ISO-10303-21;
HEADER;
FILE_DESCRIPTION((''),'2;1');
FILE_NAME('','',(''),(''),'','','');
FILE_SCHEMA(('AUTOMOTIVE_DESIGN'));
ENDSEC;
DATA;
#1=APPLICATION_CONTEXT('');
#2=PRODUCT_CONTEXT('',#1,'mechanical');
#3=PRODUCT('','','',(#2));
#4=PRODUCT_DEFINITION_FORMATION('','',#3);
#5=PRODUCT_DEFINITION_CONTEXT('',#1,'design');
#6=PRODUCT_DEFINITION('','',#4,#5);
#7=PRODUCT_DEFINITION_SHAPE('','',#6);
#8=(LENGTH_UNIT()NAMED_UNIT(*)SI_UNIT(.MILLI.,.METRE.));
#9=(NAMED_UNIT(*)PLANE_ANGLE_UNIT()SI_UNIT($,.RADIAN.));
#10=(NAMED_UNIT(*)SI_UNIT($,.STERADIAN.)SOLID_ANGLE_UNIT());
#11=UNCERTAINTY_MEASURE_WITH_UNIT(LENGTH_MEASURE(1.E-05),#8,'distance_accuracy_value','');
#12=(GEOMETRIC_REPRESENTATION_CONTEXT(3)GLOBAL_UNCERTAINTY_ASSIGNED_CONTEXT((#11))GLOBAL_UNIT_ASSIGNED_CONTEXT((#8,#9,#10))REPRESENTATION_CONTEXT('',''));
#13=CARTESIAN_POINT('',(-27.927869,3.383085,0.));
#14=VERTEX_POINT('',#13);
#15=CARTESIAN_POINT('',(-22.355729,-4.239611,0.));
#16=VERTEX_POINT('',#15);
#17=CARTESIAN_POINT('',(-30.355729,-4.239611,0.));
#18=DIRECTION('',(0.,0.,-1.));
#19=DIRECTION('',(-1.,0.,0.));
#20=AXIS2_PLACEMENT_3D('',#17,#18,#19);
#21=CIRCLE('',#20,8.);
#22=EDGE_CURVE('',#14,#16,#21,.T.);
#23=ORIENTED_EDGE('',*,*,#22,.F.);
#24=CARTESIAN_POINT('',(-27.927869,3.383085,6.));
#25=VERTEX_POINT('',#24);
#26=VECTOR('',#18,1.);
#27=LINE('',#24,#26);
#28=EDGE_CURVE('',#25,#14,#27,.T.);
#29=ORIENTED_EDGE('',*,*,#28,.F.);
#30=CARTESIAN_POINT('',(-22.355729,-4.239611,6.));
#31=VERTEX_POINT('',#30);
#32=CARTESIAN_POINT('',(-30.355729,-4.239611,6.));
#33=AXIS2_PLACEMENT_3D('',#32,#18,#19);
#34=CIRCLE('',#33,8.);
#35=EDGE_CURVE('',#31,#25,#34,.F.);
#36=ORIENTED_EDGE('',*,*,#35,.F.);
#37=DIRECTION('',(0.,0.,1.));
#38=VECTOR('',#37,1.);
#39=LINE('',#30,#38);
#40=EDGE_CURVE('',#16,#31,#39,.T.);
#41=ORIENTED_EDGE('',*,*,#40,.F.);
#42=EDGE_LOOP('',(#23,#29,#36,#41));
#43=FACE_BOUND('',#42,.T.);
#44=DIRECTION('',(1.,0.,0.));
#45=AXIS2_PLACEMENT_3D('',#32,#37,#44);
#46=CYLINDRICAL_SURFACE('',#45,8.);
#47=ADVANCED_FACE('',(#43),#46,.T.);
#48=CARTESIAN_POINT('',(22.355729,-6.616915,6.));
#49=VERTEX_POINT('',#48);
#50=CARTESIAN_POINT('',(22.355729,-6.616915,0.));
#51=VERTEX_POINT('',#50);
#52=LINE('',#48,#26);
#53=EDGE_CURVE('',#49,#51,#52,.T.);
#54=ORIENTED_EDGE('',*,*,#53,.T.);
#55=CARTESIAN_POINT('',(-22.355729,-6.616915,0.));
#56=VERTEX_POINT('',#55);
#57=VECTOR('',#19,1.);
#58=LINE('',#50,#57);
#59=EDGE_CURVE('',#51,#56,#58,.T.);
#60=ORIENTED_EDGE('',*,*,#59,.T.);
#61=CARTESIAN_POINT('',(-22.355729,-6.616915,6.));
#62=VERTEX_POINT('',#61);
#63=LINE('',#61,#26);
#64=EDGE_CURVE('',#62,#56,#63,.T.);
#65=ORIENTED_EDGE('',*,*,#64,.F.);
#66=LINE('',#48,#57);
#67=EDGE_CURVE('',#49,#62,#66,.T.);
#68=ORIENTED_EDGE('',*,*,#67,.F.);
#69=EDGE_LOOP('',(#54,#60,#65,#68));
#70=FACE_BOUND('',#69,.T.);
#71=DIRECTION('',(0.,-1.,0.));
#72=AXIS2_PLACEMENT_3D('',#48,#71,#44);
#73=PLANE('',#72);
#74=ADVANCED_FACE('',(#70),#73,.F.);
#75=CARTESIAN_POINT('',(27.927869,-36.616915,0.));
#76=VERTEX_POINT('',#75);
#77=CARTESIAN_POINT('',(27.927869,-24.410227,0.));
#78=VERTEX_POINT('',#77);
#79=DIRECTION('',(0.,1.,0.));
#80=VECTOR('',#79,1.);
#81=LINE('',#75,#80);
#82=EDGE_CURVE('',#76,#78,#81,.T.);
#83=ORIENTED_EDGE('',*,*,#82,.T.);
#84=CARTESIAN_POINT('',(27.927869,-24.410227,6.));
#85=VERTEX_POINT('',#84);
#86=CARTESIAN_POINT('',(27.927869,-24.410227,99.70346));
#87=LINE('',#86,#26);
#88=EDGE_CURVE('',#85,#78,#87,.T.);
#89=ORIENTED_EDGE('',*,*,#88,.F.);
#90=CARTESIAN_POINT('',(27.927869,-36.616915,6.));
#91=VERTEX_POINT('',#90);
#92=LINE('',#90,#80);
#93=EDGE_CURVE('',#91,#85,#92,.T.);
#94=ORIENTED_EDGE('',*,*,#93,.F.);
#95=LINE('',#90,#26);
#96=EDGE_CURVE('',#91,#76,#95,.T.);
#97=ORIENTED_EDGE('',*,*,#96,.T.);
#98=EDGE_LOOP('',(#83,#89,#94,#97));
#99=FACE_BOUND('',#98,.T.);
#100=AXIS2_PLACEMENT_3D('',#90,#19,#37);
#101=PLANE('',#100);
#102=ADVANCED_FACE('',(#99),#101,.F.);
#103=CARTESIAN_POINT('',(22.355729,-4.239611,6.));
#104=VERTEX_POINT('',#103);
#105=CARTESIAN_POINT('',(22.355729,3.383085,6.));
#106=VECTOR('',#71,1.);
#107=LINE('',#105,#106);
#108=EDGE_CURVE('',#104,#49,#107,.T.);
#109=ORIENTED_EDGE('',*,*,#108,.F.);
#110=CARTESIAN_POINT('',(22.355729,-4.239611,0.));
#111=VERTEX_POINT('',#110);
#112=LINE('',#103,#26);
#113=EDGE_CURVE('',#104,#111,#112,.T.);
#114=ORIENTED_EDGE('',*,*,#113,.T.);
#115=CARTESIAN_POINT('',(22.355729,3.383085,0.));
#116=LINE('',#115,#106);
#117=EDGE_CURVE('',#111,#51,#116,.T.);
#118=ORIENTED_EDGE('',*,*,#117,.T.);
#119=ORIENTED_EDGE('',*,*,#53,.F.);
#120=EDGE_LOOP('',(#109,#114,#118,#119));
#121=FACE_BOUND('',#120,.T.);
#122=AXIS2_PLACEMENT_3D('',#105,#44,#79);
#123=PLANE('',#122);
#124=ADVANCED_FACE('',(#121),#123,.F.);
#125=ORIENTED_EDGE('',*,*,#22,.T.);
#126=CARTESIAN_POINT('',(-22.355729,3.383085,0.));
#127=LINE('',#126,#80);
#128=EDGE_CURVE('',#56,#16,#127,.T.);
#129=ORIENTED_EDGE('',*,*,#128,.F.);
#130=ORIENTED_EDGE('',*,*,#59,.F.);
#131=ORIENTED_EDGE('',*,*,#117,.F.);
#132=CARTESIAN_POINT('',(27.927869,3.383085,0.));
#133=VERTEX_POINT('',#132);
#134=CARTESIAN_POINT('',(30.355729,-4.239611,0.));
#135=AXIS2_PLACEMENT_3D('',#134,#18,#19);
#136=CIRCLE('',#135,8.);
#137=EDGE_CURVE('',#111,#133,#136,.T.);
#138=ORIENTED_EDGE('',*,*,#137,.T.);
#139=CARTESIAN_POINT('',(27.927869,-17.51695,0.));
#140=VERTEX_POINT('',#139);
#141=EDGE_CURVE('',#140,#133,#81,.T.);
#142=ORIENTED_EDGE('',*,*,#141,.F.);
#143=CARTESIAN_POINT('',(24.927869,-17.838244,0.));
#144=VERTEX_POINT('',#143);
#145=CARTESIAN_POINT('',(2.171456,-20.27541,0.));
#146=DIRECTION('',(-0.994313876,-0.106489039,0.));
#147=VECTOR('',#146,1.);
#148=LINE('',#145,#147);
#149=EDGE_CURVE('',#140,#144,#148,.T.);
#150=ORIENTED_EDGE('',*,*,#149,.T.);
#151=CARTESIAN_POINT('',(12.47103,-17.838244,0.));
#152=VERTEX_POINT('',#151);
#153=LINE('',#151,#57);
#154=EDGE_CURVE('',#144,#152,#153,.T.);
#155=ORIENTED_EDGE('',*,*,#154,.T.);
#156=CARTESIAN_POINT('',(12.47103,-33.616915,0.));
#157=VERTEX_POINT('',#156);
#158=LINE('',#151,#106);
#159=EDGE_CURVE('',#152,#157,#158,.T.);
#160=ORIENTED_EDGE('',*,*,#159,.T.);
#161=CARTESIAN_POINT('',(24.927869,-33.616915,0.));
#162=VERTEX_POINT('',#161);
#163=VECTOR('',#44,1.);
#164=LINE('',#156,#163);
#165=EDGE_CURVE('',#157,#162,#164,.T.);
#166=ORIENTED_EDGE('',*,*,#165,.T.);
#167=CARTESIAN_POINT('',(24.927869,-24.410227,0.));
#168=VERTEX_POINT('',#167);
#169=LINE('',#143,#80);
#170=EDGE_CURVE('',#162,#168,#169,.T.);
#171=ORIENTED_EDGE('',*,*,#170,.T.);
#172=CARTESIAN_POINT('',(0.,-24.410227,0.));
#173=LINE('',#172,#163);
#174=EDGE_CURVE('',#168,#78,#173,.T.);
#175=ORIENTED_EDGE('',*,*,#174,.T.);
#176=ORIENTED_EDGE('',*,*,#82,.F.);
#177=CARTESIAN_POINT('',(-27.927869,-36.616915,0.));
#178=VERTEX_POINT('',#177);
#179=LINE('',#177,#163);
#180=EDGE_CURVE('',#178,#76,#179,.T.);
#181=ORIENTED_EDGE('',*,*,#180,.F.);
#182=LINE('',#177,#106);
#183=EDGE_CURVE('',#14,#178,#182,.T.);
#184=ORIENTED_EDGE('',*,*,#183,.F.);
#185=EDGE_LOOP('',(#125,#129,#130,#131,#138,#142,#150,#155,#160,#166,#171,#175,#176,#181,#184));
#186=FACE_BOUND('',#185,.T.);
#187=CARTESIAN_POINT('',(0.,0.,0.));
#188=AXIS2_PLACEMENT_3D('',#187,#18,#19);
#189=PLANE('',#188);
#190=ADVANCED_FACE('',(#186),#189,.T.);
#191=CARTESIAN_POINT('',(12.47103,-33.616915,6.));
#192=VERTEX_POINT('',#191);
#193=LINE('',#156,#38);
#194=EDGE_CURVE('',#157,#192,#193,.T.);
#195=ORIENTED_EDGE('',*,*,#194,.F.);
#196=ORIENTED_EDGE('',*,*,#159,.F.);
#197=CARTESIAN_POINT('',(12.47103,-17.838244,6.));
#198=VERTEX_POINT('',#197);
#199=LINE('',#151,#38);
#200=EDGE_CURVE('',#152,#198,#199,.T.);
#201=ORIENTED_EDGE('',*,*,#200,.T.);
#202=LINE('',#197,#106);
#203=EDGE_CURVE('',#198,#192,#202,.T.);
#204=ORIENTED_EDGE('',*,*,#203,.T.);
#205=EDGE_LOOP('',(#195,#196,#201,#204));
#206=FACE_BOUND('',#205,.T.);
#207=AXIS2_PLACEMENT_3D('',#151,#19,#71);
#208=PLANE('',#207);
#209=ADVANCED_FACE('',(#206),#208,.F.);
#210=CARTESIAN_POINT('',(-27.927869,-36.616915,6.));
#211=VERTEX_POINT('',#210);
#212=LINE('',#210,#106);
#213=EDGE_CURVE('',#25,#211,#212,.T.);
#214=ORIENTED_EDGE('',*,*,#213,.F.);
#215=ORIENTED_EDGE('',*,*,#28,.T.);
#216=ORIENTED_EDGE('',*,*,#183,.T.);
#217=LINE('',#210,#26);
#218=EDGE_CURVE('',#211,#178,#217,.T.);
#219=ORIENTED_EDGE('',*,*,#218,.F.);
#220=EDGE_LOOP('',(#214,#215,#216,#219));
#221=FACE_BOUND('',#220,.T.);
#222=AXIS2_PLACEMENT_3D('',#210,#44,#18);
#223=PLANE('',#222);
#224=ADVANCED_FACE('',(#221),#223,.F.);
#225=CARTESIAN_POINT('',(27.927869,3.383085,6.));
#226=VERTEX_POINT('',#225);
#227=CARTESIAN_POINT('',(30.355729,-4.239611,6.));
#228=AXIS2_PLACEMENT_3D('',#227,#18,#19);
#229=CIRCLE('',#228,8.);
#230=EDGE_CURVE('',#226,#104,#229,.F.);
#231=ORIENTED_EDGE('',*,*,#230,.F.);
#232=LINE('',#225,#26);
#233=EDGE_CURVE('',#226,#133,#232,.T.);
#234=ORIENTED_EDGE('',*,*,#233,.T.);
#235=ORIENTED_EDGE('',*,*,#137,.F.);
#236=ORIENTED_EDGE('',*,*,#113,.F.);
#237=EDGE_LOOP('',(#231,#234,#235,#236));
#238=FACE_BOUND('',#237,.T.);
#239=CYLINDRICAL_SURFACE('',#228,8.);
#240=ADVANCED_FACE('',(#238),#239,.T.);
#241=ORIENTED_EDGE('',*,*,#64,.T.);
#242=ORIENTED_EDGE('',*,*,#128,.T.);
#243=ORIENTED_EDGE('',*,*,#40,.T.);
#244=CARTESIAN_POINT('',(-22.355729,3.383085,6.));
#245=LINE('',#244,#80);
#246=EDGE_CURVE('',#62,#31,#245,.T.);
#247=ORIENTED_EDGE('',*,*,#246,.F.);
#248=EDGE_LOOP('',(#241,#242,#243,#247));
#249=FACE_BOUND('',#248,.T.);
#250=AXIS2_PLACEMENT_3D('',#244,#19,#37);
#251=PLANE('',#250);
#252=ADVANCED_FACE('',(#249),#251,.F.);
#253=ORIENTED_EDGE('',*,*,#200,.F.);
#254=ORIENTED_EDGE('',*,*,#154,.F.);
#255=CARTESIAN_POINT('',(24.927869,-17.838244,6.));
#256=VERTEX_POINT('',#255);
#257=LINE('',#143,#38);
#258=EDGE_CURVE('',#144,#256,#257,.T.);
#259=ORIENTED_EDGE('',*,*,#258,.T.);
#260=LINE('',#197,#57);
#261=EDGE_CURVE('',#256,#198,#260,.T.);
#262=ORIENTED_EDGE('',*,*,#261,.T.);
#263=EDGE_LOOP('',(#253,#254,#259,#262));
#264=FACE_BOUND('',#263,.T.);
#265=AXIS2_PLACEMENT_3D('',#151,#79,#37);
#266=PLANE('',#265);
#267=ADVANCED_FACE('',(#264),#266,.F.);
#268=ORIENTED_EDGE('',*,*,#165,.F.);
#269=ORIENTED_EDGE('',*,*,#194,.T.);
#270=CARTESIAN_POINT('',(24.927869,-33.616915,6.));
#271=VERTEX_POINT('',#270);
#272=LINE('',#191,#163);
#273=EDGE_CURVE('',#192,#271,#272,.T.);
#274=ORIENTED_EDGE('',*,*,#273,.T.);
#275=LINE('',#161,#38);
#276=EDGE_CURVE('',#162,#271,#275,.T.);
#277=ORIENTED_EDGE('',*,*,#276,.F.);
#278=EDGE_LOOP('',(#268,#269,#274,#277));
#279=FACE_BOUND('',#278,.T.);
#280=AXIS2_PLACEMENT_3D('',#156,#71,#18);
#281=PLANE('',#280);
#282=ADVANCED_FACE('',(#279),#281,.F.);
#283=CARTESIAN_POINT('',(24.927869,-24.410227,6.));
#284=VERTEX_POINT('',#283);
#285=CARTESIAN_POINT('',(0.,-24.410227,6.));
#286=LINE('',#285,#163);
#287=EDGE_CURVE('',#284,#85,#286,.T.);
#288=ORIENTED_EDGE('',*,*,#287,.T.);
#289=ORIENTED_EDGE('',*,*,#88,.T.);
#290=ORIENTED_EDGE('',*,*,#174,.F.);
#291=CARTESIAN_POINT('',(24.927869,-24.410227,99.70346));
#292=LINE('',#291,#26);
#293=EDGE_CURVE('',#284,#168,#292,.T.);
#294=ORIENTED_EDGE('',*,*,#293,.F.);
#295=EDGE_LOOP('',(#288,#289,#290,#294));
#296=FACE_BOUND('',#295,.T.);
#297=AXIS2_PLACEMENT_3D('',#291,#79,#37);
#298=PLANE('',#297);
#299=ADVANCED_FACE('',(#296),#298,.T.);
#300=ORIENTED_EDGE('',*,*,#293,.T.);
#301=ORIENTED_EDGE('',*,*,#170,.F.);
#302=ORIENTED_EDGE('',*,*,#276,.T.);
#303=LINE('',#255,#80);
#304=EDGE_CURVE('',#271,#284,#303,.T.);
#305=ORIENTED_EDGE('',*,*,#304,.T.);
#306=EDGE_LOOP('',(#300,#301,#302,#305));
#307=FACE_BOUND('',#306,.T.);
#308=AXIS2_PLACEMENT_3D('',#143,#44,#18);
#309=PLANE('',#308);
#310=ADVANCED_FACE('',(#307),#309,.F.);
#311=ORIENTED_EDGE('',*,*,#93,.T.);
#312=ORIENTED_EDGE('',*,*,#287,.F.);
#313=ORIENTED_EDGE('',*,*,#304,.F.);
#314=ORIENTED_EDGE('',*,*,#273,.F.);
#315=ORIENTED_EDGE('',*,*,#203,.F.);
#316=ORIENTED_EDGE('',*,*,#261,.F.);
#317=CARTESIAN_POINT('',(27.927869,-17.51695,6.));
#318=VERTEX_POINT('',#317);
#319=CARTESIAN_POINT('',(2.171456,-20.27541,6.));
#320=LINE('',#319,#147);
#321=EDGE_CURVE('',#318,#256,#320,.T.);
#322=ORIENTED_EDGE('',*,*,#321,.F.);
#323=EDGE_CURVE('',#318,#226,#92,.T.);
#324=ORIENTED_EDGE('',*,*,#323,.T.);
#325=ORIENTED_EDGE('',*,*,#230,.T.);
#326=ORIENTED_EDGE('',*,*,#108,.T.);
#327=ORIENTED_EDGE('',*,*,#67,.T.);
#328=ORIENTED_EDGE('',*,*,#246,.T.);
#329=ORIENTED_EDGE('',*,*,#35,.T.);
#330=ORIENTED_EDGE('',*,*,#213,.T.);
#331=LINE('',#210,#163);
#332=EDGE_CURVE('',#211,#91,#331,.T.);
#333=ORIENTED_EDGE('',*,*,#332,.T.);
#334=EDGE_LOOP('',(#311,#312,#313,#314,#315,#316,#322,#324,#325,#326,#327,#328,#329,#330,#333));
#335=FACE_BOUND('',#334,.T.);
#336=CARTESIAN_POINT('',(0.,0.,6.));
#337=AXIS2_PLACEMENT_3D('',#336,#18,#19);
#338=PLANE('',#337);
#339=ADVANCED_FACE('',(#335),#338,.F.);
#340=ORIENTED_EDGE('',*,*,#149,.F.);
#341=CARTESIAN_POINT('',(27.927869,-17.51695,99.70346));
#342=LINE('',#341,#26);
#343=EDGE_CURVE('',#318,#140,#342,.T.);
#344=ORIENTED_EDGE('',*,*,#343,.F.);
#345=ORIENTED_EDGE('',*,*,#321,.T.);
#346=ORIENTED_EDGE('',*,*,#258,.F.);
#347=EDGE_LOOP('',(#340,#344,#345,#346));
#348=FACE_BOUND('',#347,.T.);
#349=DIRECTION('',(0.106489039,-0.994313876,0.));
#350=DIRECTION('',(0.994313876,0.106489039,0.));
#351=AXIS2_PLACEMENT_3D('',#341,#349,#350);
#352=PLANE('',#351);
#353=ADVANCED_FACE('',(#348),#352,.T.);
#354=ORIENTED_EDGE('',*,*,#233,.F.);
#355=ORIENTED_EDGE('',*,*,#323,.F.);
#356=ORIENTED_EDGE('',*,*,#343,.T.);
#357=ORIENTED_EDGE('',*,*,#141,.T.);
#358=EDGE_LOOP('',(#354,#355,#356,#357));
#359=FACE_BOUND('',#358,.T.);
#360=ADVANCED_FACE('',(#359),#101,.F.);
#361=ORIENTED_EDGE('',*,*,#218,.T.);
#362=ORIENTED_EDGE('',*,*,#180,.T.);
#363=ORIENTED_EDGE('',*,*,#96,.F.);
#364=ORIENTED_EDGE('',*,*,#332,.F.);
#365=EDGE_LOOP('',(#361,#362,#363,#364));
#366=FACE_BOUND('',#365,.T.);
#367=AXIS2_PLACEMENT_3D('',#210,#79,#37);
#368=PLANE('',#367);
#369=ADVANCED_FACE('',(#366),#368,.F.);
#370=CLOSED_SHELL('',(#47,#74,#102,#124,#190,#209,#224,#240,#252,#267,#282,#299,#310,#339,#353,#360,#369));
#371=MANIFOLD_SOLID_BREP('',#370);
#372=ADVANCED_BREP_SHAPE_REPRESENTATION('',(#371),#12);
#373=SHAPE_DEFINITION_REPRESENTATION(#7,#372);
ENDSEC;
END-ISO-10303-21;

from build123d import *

# Parameters (mm, degrees)
BOSS_EXTRUDE1_DEPTH     = 6
FILLET7_R               = 8
FILLET8_R               = 8
SKETCH3_W               = 12.456838911
SKETCH3_H               = 15.77867169
CUT_EXTRUDE1_DEPTH      = 47.440976911
CUT_EXTRUDE2_DEPTH      = 47.440976911
CUT_EXTRUDE2_DEPTH_BACK = 47.440976911


with BuildPart() as part:
    # Sketch1 → Boss-Extrude1 (new body)
    with BuildSketch(Plane.XY):
        Polygon((-27.927868544, -36.616915423), (27.927868544, -36.616915423), (27.927868544, 3.383084577), (22.35572924, 3.383084577), (22.35572924, -6.616915423), (-22.35572924, -6.616915423), (-22.35572924, 3.383084577), (-27.927868544, 3.383084577), align=None)
    extrude(amount=BOSS_EXTRUDE1_DEPTH)

    # Fillet7
    # the kernel refuses this fillet: 8 mm, written as the material it takes off along each edge
    with BuildSketch(Plane(origin=(-22.35572924, 3.383084577, -19.056739693), x_dir=(0, -1, 0), z_dir=(0, 0, 1))) as fillet7_piece_1:
        with BuildLine():
            CenterArc((7.622695877, -8), FILLET7_R, 90, 72.333104018)
            Line((0, -5.572139303), (-0.152453918, -5.52358209))
            ThreePointArc((-0.152453918, -5.52358209), (-0.16, -2.786069652), (-0.16, 0))
            Line((-0.16, 0), (0, 0.16))
            Line((0, 0.16), (7.622695877, 0.16))
            Line((7.622695877, 0.16), (7.622695877, 0))
        make_face()
    extrude(amount=44.113479387, mode=Mode.SUBTRACT)

    # Fillet8
    # the kernel refuses this fillet: 8 mm, written as the material it takes off along each edge
    with BuildSketch(Plane(origin=(22.35572924, 3.383084577, -19.056739693), x_dir=(1, 0, 0), z_dir=(0, 0, 1))) as fillet8_piece_1:
        with BuildLine():
            CenterArc((8, -7.622695877), FILLET8_R, 107.666895982, 72.333104018)
            Line((0, -7.622695877), (-0.16, -7.622695877))
            Line((-0.16, -7.622695877), (-0.16, 0))
            Line((-0.16, 0), (0, 0.16))
            ThreePointArc((0, 0.16), (2.786069652, 0.16), (5.52358209, 0.152453918))
            Line((5.52358209, 0.152453918), (5.572139303, 0))
        make_face()
    extrude(amount=44.113479387, mode=Mode.SUBTRACT)

    # Sketch3 → Cut-Extrude1 (cut, through all)
    with BuildSketch(Plane.XY.offset(6)):
        with Locations((18.699449089, -25.727579578)):
            Rectangle(SKETCH3_W, SKETCH3_H)
    extrude(amount=-CUT_EXTRUDE1_DEPTH, mode=Mode.SUBTRACT)

    # Sketch4 → Cut-Extrude2 (cut, two sides: drawn at the far end of the back side and taken through both)
    with BuildSketch(Plane.XY.offset(6).offset(-CUT_EXTRUDE2_DEPTH_BACK)):
        Polygon((161.938614763, -3.164665246), (27.927868544, -17.516949699), (24.927868544, -17.838243733), (24.927868544, -24.410226663), (27.927868544, -24.410226663), (162.70497406, -24.410226663), (432.083990377, -14.69332112), (431.317631081, 6.552240297), align=None)
    extrude(amount=CUT_EXTRUDE2_DEPTH + CUT_EXTRUDE2_DEPTH_BACK, mode=Mode.SUBTRACT)


solid = part.part
